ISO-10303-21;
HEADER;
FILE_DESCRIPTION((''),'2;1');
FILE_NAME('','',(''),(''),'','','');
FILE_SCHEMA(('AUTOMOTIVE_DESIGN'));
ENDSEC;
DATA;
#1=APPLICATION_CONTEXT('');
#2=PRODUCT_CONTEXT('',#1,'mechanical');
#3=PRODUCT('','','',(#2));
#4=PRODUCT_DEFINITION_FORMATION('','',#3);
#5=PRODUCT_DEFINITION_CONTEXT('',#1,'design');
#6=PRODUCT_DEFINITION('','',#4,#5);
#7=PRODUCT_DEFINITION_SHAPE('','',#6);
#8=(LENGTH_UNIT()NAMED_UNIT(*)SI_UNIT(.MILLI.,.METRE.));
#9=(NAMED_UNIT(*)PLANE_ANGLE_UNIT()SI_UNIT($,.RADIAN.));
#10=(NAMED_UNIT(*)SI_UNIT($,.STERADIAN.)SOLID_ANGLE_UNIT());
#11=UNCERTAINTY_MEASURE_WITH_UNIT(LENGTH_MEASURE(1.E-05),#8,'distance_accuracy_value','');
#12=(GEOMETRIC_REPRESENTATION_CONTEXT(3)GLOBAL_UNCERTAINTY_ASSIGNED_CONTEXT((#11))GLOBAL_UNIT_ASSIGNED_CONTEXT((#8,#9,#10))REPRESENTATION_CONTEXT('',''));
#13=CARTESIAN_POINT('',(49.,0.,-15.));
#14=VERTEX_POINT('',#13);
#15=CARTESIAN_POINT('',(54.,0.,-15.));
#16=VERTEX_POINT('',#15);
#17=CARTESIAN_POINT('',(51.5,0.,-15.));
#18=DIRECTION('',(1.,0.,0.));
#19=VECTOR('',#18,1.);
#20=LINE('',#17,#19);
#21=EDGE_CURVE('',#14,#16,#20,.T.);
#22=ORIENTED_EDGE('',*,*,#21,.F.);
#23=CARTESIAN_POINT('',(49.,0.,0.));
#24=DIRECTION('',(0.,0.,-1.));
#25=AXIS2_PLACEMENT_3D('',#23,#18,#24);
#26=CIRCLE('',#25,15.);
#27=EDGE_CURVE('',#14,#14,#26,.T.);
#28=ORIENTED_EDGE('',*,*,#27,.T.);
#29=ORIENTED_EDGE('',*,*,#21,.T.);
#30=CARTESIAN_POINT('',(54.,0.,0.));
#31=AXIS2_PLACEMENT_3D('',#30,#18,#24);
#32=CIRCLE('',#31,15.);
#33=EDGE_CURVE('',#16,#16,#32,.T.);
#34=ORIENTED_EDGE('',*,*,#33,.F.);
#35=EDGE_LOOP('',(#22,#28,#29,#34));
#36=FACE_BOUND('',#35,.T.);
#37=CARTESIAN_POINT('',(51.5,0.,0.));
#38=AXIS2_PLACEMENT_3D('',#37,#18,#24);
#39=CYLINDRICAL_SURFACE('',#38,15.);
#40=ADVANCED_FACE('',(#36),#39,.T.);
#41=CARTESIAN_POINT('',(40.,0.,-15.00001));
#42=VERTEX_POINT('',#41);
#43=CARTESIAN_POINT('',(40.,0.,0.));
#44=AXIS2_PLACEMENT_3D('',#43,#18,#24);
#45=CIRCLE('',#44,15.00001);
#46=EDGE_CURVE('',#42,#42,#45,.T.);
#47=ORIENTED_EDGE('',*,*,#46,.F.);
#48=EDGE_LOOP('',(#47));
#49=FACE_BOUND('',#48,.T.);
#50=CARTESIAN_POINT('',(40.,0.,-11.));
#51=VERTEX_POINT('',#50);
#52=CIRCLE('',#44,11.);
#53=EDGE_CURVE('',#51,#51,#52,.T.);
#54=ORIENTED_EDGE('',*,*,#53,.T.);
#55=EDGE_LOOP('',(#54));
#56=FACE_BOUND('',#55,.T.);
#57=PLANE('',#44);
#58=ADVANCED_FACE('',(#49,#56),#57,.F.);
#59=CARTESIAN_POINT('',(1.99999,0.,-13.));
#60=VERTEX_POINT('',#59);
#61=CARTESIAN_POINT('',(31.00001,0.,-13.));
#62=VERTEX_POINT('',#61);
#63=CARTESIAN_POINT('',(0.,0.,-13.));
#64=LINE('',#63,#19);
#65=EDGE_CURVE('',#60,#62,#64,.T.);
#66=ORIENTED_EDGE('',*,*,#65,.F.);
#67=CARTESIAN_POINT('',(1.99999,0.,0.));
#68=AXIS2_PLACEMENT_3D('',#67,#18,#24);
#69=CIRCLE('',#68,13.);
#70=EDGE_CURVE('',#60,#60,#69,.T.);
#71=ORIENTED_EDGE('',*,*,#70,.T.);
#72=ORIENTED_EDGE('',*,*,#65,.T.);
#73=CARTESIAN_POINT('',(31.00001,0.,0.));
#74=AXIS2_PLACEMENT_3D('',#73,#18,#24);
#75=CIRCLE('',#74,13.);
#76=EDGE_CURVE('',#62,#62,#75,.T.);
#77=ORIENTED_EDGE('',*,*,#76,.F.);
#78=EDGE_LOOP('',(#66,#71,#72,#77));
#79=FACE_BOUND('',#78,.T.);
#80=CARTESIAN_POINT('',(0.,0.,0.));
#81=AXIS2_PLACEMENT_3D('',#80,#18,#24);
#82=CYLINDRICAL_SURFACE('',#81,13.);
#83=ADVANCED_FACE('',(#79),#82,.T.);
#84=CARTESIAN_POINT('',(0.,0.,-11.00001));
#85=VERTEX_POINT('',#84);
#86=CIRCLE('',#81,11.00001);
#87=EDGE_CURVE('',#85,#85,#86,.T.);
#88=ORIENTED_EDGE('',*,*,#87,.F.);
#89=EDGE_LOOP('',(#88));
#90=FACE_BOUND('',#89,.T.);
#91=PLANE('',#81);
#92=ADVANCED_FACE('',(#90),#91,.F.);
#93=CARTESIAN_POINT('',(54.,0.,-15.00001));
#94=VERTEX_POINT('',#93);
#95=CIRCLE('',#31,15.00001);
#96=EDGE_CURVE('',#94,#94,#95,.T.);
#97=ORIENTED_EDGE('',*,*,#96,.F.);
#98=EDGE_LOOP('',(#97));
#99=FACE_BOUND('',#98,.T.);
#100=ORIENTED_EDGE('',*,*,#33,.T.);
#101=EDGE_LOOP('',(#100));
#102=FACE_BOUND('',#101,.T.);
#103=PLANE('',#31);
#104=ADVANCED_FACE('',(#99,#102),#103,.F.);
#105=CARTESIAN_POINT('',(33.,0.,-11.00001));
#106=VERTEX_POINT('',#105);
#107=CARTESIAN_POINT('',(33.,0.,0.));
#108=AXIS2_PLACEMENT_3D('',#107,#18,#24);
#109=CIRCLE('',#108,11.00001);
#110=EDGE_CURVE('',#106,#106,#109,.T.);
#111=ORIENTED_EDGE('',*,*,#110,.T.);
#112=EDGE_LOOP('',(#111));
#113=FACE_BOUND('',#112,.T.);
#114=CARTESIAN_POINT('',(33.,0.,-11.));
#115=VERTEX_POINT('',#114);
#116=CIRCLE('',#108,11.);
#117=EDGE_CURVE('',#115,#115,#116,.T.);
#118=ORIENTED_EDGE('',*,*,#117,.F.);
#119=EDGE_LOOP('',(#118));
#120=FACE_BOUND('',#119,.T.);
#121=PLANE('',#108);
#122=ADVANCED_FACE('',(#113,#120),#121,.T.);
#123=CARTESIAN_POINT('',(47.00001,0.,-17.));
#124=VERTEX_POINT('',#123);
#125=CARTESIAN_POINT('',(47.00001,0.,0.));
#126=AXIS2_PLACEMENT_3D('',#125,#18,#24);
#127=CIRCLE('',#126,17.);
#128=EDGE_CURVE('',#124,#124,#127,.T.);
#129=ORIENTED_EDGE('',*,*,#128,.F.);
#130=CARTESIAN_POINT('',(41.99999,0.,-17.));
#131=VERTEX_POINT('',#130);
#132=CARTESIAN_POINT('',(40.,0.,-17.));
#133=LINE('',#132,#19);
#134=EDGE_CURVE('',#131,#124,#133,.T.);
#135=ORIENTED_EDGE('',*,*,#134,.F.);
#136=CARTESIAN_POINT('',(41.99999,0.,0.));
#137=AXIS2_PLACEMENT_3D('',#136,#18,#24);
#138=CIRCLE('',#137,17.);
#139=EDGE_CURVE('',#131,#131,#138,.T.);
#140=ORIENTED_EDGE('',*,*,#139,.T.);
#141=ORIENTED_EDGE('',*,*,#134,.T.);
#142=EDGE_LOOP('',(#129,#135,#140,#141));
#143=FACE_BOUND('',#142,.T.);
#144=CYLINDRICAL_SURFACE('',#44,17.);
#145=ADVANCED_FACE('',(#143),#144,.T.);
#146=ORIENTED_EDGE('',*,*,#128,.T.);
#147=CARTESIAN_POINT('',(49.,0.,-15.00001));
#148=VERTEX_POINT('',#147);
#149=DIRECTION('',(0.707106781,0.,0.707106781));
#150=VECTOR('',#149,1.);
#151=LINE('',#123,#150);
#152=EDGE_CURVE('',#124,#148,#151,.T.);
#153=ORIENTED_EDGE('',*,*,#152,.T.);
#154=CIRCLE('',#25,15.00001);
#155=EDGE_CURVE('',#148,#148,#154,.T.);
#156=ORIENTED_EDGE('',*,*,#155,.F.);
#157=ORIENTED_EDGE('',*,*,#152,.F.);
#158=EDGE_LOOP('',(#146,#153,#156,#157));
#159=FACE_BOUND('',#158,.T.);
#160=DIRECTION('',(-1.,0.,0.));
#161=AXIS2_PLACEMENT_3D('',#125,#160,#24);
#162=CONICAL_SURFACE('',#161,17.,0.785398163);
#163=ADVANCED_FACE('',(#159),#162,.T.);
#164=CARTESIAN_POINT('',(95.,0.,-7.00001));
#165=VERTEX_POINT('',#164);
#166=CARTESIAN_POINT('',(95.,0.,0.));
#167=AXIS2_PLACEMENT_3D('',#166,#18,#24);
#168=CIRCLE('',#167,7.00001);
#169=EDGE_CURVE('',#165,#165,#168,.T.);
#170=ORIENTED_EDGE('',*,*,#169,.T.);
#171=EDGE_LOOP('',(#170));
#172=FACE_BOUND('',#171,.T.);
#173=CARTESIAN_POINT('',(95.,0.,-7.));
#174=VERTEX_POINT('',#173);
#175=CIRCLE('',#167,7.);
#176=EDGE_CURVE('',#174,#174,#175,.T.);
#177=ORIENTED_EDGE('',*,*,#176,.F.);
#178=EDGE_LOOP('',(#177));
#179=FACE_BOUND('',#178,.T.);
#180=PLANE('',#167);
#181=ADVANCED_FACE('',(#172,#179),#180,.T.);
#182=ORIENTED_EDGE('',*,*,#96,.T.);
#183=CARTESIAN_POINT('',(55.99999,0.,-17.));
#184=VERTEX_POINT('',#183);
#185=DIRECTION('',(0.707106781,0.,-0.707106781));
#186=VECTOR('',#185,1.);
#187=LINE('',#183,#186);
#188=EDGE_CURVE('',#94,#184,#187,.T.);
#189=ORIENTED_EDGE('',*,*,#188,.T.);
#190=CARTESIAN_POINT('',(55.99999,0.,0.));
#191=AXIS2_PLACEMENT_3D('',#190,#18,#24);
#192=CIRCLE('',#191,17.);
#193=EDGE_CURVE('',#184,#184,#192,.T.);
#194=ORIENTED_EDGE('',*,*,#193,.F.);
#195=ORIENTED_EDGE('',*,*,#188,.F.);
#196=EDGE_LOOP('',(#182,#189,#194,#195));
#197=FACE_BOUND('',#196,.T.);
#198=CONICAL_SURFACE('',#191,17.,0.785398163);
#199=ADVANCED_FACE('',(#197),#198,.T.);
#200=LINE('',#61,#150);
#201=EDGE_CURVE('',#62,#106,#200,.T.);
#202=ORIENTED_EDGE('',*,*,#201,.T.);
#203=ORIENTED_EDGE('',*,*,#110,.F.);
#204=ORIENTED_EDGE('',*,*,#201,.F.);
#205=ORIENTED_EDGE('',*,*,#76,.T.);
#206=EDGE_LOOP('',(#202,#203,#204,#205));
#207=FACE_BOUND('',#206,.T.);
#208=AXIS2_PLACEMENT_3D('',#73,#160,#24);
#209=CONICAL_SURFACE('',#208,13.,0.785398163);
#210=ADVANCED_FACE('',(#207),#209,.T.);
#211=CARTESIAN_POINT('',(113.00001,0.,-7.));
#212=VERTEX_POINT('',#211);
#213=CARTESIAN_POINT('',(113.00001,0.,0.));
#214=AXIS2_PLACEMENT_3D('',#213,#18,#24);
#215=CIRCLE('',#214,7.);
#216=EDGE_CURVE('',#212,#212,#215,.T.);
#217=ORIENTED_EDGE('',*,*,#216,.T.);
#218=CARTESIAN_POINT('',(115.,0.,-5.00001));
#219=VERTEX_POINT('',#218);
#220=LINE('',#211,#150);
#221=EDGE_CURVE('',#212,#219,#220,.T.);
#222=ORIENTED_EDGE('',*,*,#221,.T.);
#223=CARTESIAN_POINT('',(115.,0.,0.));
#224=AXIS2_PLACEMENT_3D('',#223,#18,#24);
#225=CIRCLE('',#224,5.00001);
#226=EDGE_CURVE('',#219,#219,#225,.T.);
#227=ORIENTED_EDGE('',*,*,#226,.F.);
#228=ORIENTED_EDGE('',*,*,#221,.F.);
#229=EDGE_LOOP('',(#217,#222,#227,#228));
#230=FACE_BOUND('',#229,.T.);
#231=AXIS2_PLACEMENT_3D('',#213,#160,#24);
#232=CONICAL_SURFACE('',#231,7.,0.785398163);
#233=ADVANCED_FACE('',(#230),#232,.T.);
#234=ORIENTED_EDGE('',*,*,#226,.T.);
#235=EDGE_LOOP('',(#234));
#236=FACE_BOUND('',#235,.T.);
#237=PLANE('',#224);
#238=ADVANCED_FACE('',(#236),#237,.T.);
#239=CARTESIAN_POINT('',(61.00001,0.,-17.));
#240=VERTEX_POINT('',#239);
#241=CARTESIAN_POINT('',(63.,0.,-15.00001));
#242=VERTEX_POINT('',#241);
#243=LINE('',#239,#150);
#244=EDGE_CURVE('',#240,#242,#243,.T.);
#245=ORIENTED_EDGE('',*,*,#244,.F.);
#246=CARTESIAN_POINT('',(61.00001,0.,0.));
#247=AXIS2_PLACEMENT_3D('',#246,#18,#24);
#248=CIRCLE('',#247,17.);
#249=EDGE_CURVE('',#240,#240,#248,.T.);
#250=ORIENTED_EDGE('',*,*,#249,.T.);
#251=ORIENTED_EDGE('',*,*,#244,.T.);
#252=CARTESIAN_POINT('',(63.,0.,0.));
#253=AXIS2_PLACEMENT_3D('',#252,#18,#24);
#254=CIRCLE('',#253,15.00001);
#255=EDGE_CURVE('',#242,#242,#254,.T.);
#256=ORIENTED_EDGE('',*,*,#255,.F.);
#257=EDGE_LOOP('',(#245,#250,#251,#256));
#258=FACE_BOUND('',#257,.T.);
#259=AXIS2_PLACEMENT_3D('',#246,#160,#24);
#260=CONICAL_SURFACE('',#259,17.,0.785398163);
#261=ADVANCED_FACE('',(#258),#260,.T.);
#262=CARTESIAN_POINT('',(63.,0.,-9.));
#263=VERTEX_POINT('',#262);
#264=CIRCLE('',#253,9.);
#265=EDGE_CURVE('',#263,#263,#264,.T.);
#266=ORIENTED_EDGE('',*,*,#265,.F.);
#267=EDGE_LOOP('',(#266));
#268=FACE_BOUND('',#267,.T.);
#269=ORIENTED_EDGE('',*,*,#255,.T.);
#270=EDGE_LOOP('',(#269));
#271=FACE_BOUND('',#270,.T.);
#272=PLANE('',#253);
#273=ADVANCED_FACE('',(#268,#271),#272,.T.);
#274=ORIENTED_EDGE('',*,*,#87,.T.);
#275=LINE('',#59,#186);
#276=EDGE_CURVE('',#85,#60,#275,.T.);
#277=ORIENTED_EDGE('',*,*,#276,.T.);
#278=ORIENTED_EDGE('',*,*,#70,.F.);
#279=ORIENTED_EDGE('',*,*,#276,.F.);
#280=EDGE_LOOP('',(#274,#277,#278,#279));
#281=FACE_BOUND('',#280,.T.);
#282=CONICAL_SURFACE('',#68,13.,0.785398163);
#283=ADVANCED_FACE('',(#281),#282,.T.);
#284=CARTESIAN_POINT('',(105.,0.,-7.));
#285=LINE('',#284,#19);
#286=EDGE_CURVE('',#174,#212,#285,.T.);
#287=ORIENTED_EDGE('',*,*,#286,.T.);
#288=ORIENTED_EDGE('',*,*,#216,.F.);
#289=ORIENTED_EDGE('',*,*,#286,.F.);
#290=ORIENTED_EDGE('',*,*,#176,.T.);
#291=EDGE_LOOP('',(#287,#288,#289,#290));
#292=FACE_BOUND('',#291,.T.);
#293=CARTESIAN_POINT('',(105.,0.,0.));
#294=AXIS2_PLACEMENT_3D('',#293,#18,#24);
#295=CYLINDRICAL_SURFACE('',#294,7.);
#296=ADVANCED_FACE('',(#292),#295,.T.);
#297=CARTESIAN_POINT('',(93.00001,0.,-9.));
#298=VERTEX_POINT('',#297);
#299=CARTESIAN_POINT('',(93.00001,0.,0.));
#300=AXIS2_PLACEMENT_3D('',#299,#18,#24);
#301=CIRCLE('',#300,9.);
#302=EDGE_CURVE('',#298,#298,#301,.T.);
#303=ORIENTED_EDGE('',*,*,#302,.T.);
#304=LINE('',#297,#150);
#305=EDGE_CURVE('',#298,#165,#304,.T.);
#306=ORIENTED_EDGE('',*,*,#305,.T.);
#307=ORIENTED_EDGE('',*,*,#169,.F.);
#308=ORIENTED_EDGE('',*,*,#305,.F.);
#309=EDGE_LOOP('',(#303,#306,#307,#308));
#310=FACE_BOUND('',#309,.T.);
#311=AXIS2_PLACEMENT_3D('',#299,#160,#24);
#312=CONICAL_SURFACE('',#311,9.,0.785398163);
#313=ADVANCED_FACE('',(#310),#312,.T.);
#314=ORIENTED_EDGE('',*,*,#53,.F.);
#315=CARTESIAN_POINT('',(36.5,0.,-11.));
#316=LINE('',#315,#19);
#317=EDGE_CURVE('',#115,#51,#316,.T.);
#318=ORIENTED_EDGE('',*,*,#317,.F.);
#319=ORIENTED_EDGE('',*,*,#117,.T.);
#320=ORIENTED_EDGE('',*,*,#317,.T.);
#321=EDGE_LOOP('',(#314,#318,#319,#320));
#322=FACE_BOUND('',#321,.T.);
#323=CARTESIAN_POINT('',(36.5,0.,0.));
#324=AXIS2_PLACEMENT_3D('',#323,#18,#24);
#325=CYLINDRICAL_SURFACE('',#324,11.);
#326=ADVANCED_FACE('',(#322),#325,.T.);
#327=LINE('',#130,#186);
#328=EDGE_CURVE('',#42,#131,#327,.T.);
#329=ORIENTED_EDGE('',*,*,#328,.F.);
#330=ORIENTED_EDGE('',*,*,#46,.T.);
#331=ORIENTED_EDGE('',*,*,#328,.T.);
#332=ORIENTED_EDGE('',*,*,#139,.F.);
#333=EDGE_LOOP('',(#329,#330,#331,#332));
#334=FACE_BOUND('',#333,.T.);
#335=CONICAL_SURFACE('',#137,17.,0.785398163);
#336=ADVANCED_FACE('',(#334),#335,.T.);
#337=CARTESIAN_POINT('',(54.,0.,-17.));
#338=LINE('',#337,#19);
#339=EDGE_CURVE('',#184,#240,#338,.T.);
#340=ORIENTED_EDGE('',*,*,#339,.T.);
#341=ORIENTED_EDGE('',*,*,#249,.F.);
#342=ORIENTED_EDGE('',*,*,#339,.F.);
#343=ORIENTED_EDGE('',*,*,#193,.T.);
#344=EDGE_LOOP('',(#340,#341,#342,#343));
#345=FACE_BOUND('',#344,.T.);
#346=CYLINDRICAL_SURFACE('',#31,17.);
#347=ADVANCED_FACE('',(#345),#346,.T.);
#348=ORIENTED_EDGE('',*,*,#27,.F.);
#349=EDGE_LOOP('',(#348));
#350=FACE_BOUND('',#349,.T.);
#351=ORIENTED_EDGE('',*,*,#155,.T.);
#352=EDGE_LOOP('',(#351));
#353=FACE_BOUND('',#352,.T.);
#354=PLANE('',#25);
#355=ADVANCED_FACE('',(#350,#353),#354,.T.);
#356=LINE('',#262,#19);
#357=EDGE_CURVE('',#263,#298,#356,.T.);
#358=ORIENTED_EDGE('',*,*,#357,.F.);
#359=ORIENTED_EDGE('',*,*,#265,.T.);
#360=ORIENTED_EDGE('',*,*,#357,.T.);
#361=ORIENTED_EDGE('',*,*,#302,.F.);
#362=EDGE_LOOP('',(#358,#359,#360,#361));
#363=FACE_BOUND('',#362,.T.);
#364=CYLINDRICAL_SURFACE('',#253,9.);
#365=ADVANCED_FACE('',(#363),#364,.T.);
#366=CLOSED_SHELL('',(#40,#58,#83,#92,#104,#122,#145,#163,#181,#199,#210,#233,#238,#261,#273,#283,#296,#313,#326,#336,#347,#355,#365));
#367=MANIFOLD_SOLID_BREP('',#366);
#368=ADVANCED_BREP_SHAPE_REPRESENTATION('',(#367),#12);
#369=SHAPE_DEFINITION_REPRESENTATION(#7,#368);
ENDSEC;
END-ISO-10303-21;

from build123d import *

# Parameters (mm, degrees)
F0_W    = 7
F0_H    = 11
F0_W_2  = 5
F0_H_2  = 15
F0_W_3  = 20
F0_H_3  = 7
F2_SIZE = 1.99999


# Not quite as in the source:
# - a fillet or chamfer is up to 0.001 mm smaller than in the source, because OpenCascade refuses the exact size


with BuildPart() as f1:
    # F0 (on Front) → F1 (revolve)
    with BuildSketch(Plane.XZ):
        Polygon((33, 0), (0, 0), (0, -13), (33, -13), (33, -11), align=None)
        with Locations((36.5, -5.5)):
            Rectangle(F0_W, F0_H)
        Polygon((49, 0), (40, 0), (40, -11), (40, -17), (49, -17), (49, -15), align=None)
        with Locations((51.5, -7.5)):
            Rectangle(F0_W_2, F0_H_2)
        Polygon((63, 0), (54, 0), (54, -15), (54, -17), (63, -17), (63, -9), align=None)
        Polygon((95, 0), (63, 0), (63, -9), (95, -9), (95, -7), align=None)
        with Locations((105, -3.5)):
            Rectangle(F0_W_3, F0_H_3)
    revolve(axis=Axis((51.5, 0, 0), (1, 0, 0)))

    # F2 (size 2 in the source; OpenCascade refuses exactly that, so slightly less here)
    f2_edges = [f1.edges().sort_by_distance(p)[0] for p in [
        (0, 0, 13),
        (33, 0, 13),
        (16.5, 0, -13),
        (40, 0, 17),
        (49, 0, 17),
        (54, 0, 17),
        (63, 0, 17),
        (95, 0, 9),
        (115, 0, 7),
    ]]
    chamfer(f2_edges, length=F2_SIZE)


solid = f1.part
